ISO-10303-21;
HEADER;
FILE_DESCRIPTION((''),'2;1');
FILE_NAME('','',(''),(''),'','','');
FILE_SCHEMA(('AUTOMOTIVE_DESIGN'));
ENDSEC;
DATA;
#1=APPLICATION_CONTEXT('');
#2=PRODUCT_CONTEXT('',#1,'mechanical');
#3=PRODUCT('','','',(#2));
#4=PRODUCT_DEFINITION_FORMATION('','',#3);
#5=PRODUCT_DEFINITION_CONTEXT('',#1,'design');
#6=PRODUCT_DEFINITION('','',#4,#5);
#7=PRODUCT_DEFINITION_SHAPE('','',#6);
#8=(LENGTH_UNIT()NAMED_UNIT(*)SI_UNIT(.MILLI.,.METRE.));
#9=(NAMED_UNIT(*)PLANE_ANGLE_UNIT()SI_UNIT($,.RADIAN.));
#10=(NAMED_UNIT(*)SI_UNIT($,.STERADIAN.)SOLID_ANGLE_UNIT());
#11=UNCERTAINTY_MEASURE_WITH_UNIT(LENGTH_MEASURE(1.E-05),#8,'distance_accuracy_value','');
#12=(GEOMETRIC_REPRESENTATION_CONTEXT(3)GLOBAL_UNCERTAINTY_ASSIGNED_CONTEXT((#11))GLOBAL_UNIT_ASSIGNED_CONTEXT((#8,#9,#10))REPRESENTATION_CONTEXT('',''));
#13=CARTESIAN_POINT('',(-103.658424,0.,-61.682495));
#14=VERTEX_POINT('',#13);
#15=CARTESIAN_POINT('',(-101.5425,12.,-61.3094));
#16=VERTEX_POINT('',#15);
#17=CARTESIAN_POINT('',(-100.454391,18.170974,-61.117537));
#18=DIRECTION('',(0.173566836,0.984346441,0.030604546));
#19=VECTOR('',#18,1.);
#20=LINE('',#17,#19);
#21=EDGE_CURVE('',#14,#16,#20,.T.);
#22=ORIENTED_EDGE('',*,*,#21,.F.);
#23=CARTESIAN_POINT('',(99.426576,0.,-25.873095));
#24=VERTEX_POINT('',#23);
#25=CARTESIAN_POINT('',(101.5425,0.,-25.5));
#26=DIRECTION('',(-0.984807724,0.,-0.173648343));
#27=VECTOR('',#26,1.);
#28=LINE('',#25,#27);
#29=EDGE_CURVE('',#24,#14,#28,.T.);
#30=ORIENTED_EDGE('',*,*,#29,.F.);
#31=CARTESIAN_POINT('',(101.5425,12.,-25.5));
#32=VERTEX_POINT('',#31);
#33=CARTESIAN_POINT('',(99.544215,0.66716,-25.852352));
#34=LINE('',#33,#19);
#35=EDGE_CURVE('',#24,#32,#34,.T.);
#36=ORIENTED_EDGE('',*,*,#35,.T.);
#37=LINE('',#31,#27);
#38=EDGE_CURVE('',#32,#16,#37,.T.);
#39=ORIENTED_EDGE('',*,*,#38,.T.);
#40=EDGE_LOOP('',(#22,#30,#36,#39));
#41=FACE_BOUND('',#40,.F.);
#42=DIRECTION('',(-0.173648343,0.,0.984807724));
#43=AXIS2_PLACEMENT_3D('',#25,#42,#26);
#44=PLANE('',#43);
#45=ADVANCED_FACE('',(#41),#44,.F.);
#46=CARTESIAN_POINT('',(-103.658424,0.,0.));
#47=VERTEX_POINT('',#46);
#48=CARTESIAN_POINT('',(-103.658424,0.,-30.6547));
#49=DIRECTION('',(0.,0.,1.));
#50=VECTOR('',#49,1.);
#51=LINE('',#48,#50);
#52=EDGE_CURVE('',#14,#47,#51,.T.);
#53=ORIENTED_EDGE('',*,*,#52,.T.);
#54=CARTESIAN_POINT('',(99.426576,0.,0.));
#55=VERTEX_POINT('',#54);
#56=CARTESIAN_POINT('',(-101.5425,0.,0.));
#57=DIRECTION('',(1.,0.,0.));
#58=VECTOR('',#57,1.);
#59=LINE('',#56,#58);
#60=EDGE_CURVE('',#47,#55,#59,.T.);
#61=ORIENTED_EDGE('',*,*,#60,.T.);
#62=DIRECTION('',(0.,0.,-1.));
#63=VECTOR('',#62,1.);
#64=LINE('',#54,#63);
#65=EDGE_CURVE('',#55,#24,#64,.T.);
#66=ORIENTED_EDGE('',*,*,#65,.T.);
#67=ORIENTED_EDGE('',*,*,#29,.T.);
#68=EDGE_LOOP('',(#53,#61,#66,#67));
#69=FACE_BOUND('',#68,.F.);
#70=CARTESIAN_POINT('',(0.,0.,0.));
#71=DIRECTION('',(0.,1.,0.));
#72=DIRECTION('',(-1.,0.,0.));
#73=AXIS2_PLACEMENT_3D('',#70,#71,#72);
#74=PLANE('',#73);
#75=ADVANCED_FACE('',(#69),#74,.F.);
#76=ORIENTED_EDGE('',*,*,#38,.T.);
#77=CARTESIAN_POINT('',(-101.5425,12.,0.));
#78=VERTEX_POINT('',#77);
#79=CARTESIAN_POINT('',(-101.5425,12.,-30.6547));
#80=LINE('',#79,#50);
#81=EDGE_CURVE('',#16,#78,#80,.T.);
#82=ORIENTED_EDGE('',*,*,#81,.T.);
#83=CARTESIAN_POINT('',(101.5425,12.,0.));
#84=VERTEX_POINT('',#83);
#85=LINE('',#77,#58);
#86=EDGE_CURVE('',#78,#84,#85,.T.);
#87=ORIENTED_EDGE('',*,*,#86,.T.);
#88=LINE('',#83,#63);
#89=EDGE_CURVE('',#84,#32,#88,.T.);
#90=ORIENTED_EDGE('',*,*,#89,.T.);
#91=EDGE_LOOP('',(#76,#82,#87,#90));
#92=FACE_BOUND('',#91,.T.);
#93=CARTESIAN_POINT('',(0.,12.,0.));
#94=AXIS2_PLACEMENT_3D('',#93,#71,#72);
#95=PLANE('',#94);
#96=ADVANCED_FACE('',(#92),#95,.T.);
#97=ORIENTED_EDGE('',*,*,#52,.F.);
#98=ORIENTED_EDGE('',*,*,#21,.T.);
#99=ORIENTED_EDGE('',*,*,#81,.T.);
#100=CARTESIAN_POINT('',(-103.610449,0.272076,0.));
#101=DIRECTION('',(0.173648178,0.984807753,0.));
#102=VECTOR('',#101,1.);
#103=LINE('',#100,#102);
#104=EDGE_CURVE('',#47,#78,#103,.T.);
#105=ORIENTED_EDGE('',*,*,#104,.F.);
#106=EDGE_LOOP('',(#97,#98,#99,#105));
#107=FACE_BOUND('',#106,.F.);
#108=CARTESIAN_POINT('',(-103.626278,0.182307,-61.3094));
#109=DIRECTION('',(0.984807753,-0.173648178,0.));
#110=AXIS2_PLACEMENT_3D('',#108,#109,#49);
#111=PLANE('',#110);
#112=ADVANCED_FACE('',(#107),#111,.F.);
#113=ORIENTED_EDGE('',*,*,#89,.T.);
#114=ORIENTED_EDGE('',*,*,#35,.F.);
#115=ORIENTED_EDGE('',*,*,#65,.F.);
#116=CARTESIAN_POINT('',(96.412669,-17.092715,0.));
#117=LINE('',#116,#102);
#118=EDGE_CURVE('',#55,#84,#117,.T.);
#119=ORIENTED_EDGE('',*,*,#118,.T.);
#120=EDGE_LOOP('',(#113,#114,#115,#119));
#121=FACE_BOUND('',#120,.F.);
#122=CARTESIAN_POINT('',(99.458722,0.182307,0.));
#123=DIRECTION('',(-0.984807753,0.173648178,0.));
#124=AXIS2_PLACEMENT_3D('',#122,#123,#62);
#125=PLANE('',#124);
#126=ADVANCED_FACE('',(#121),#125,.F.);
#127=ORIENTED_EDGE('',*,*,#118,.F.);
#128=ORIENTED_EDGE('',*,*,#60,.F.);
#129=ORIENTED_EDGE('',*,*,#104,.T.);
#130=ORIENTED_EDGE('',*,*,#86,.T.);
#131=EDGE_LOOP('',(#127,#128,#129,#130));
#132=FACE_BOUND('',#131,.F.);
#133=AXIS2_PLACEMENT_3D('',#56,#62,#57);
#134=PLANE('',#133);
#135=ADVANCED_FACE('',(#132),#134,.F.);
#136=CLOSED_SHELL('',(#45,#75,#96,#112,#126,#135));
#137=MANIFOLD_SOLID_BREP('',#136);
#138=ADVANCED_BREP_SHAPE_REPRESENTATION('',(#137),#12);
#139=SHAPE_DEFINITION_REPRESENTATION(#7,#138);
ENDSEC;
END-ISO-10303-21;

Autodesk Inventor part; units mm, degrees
ref_plane "Work Plane1" through (99.4266, 0, -12.9365) normal (0.9848078, -0.1736482, 0) x (0, 0, -1)
ref_plane "Work Plane2" through (-102.6005, 6, 0) normal (0, 0, 1) x (1, 0, 0)
ref_plane "Work Plane3" through (-101.5425, 12, -61.3094) normal (0.1735668, -0.0306045, -0.9843464) x (0.9848078, 0, 0.1736482)
sketch "Sketch1" plane through (0, 0, 0) normal (0, 1, 0) x (-1, 0, 0)
  line L0 (101.5425, -61.3094) -> (101.5425, 0)
  line L1 (101.5425, 0) -> (-101.5425, 0)
  line L2 (-101.5425, 0) -> (-101.5425, -25.5)
  line L3 (-101.5425, -25.5) -> (101.5425, -61.3094)
  point P0 (0, 0)
  point P1 (0, 0)
  dimension "d0" = 100
  dimension "d1" = 25.5
  dimension "d5" = 203.085
  dimension "d15" = 25.5
  dimension "d16" = 156.1695
extrude "Extrusion1" add sketch "Sketch1" along normal blind 12
draft "FaceDraft2" angle 10 pull direction (0, -1, 0) faces at (101.5425, 4, -8.5) fixed edges at (101.5425, 12, -12.75)
draft "FaceDraft3" angle -10 pull direction (0, -1, 0) faces at (-101.5425, 4, -40.8729) fixed edges at (-101.5425, 12, -30.6547)
equation "\"d15\" = d1"
properties part number "Panel_side"
